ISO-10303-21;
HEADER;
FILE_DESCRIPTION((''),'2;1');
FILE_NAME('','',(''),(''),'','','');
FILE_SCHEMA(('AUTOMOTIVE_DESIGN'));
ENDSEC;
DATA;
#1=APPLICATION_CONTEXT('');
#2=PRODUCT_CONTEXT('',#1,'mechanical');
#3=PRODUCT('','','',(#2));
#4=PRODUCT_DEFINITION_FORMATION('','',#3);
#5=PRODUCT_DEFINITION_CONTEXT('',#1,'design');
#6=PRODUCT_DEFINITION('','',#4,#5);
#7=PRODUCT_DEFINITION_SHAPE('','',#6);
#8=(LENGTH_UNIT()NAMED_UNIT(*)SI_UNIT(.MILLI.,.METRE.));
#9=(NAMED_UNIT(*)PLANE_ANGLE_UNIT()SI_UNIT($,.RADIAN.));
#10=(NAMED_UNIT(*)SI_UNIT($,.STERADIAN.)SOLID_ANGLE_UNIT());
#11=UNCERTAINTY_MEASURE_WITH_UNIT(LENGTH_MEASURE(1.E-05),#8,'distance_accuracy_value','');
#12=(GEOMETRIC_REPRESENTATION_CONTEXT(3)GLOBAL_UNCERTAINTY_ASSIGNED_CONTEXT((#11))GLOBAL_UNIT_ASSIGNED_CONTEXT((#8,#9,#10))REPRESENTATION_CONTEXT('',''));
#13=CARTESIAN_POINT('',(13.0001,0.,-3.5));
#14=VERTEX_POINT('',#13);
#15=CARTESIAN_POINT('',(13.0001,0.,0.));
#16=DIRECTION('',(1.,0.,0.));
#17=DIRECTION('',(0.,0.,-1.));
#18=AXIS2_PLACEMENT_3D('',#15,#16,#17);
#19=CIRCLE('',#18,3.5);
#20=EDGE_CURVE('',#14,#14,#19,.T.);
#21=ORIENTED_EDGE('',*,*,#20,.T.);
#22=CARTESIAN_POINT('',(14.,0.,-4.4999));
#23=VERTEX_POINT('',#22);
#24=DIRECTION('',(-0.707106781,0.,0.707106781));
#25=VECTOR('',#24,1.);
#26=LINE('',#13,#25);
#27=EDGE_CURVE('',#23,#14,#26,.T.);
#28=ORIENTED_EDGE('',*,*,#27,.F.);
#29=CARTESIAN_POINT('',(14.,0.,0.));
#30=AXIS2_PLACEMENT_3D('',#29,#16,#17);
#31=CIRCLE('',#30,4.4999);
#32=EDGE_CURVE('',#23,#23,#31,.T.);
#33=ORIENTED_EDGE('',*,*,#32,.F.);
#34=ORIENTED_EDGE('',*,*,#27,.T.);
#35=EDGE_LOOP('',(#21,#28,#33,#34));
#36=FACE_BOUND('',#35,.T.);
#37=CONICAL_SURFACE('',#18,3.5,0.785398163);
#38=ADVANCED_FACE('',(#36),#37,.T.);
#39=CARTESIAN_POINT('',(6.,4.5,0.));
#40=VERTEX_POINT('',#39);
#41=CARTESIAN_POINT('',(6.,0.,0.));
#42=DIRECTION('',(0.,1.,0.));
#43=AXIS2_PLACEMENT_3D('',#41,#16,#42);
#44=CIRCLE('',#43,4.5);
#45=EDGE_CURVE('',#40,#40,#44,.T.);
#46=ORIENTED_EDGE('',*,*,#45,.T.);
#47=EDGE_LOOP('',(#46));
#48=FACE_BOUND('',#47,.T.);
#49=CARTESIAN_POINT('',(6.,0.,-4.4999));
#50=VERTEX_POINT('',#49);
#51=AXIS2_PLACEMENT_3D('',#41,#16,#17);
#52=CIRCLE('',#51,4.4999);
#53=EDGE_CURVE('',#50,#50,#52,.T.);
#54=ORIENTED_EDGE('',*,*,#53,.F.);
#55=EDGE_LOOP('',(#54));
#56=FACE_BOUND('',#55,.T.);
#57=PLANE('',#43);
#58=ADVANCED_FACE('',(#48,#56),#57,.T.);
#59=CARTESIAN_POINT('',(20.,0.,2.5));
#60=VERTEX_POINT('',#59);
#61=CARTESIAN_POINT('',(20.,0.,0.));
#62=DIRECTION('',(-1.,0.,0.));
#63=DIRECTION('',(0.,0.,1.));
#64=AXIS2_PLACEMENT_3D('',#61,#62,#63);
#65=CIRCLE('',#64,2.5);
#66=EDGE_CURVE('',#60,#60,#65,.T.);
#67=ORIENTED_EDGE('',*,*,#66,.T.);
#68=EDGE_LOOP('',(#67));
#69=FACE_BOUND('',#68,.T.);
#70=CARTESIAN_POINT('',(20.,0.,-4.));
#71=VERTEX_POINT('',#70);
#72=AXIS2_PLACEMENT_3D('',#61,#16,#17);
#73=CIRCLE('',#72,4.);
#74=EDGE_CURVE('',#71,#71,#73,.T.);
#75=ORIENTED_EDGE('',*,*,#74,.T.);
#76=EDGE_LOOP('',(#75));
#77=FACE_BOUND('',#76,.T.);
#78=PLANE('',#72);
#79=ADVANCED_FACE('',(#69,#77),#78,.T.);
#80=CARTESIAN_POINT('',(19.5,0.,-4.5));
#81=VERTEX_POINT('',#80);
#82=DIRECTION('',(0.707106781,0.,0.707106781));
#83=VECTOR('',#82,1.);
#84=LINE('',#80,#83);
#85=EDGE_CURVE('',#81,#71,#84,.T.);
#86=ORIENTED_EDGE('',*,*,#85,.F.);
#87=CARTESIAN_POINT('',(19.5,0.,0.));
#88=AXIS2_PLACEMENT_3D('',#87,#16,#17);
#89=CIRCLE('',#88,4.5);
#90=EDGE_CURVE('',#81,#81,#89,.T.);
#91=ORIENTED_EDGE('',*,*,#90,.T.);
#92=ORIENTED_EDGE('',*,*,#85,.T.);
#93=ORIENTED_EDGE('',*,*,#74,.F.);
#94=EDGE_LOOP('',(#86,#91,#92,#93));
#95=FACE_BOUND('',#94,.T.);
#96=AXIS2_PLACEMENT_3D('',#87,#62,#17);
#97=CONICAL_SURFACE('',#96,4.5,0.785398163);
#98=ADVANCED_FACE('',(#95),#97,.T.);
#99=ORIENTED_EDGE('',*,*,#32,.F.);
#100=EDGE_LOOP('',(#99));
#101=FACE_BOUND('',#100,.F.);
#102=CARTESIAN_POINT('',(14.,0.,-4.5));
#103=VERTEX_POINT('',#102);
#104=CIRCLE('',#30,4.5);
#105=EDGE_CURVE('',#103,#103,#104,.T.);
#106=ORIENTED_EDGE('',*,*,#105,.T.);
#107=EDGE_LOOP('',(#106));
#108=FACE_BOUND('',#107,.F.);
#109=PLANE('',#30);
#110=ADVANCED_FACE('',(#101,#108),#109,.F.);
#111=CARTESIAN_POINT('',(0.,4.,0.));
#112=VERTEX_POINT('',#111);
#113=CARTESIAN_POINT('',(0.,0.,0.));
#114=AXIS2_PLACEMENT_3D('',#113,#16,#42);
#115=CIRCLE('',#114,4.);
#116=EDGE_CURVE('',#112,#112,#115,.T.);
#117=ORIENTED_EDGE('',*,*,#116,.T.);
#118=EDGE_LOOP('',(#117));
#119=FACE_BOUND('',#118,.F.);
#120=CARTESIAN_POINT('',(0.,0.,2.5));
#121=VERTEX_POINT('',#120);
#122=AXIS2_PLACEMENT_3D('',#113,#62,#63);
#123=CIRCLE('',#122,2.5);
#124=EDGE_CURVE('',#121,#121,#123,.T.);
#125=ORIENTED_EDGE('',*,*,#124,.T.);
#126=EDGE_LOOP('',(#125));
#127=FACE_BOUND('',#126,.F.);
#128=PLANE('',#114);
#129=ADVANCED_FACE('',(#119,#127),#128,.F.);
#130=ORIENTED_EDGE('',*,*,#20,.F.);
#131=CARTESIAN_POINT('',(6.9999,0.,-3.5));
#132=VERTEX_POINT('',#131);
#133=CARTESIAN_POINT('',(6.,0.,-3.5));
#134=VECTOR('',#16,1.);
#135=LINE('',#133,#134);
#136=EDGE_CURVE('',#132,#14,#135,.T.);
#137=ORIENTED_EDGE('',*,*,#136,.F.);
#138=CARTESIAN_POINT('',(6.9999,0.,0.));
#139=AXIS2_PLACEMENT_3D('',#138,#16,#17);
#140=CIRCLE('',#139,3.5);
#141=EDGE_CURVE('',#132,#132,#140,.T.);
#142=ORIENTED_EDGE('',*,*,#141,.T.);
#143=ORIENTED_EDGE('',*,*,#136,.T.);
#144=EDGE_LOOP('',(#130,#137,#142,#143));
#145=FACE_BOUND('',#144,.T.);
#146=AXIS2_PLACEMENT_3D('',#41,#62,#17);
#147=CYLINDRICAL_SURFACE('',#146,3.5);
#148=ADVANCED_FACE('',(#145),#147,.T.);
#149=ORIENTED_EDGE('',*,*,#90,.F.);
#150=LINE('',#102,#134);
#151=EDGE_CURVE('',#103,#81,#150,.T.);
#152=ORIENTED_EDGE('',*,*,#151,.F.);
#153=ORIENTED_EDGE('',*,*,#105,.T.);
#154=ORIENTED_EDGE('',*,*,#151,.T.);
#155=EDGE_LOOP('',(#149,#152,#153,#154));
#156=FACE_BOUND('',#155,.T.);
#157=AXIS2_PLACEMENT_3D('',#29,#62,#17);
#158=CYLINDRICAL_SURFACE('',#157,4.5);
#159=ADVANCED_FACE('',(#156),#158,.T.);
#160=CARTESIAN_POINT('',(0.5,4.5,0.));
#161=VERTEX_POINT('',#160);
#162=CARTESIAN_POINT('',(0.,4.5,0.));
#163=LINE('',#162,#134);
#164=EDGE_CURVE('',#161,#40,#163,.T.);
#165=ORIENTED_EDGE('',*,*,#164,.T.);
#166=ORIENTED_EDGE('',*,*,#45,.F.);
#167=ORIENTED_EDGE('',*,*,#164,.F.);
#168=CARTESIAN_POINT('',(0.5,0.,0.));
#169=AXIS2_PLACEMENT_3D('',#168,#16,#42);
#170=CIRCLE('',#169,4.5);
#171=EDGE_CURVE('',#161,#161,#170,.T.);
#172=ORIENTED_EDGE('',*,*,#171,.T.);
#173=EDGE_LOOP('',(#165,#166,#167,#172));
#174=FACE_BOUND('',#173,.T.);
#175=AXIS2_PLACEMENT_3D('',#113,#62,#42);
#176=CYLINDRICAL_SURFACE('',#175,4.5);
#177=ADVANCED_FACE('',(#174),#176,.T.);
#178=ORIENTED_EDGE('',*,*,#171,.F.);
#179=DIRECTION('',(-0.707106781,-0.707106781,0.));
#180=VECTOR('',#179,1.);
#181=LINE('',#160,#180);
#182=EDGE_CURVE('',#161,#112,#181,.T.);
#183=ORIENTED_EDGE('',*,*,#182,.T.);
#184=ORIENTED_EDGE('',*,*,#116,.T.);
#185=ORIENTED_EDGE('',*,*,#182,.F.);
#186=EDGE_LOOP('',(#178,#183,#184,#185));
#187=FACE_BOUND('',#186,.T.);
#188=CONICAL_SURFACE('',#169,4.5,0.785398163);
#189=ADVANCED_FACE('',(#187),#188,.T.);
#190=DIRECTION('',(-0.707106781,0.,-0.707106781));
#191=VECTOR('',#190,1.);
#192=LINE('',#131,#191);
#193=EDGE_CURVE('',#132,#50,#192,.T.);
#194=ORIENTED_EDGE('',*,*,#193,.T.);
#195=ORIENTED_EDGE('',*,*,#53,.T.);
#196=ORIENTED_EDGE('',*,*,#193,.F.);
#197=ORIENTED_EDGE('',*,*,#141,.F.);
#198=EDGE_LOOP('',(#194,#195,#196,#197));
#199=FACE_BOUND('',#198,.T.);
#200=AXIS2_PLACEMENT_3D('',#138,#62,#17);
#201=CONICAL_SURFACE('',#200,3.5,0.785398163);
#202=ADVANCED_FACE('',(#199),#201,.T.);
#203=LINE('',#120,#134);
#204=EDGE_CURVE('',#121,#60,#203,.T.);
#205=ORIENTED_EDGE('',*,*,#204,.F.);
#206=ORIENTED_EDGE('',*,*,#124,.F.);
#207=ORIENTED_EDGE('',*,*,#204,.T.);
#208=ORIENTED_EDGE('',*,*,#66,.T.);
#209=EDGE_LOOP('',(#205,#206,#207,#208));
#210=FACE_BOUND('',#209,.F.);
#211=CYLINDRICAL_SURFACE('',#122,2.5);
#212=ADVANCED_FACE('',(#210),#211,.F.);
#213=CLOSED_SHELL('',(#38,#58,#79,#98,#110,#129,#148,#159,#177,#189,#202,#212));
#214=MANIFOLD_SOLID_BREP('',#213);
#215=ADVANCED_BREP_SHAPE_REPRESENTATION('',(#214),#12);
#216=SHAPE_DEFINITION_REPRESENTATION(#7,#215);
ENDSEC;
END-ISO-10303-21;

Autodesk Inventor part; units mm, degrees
ref_plane "YZ Plane" through (0, 0, 0) normal (1, 0, 0) x (0, 1, 0)
ref_plane "XZ Plane" through (0, 0, 0) normal (0, 1, 0) x (-1, 0, 0)
ref_plane "XY Plane" through (0, 0, 0) normal (0, 0, 1) x (1, 0, 0)
sketch "Sketch1" plane through (0, 0, 0) normal (1, 0, 0) x (0, 1, 0)
  circle A0 centre (0, 0) radius 4.5
  dimension "d0" = 9
extrude "Extrusion1" add sketch "Sketch1" along normal blind 6
sketch "Sketch2" plane through (6, 0, 0) normal (1, 0, 0) x (0, 0, -1)
  circle A0 centre (0, 0) radius 3.5
  dimension "d3" = 7
extrude "Extrusion2" add sketch "Sketch2" along normal blind 8
sketch "Sketch3" plane through (14, 0, 0) normal (1, 0, 0) x (0, 0, -1)
  circle A0 centre (0, 0) radius 4.5 projected
extrude "Extrusion3" add sketch "Sketch3" along normal blind 6
chamfer "Chamfer1" distance 1 angle 45 2 edges at (6, 0, 3.5) (14, 0, 3.5)
chamfer "Chamfer2" distance 0.5 angle 45 2 edges at (0, -4.5, 0) (20, 0, 4.5)
sketch "Sketch4" plane through (0, 0, 0) normal (-1, 0, 0) x (0, 0, 1)
  circle A0 centre (0, 0) radius 3.5 projected
  circle A1 centre (0, 0) radius 2.5
  dimension "d14" = 5
extrude "Extrusion4" cut sketch "Sketch4" against normal through all contours A1
properties part number "motor_coupling"
